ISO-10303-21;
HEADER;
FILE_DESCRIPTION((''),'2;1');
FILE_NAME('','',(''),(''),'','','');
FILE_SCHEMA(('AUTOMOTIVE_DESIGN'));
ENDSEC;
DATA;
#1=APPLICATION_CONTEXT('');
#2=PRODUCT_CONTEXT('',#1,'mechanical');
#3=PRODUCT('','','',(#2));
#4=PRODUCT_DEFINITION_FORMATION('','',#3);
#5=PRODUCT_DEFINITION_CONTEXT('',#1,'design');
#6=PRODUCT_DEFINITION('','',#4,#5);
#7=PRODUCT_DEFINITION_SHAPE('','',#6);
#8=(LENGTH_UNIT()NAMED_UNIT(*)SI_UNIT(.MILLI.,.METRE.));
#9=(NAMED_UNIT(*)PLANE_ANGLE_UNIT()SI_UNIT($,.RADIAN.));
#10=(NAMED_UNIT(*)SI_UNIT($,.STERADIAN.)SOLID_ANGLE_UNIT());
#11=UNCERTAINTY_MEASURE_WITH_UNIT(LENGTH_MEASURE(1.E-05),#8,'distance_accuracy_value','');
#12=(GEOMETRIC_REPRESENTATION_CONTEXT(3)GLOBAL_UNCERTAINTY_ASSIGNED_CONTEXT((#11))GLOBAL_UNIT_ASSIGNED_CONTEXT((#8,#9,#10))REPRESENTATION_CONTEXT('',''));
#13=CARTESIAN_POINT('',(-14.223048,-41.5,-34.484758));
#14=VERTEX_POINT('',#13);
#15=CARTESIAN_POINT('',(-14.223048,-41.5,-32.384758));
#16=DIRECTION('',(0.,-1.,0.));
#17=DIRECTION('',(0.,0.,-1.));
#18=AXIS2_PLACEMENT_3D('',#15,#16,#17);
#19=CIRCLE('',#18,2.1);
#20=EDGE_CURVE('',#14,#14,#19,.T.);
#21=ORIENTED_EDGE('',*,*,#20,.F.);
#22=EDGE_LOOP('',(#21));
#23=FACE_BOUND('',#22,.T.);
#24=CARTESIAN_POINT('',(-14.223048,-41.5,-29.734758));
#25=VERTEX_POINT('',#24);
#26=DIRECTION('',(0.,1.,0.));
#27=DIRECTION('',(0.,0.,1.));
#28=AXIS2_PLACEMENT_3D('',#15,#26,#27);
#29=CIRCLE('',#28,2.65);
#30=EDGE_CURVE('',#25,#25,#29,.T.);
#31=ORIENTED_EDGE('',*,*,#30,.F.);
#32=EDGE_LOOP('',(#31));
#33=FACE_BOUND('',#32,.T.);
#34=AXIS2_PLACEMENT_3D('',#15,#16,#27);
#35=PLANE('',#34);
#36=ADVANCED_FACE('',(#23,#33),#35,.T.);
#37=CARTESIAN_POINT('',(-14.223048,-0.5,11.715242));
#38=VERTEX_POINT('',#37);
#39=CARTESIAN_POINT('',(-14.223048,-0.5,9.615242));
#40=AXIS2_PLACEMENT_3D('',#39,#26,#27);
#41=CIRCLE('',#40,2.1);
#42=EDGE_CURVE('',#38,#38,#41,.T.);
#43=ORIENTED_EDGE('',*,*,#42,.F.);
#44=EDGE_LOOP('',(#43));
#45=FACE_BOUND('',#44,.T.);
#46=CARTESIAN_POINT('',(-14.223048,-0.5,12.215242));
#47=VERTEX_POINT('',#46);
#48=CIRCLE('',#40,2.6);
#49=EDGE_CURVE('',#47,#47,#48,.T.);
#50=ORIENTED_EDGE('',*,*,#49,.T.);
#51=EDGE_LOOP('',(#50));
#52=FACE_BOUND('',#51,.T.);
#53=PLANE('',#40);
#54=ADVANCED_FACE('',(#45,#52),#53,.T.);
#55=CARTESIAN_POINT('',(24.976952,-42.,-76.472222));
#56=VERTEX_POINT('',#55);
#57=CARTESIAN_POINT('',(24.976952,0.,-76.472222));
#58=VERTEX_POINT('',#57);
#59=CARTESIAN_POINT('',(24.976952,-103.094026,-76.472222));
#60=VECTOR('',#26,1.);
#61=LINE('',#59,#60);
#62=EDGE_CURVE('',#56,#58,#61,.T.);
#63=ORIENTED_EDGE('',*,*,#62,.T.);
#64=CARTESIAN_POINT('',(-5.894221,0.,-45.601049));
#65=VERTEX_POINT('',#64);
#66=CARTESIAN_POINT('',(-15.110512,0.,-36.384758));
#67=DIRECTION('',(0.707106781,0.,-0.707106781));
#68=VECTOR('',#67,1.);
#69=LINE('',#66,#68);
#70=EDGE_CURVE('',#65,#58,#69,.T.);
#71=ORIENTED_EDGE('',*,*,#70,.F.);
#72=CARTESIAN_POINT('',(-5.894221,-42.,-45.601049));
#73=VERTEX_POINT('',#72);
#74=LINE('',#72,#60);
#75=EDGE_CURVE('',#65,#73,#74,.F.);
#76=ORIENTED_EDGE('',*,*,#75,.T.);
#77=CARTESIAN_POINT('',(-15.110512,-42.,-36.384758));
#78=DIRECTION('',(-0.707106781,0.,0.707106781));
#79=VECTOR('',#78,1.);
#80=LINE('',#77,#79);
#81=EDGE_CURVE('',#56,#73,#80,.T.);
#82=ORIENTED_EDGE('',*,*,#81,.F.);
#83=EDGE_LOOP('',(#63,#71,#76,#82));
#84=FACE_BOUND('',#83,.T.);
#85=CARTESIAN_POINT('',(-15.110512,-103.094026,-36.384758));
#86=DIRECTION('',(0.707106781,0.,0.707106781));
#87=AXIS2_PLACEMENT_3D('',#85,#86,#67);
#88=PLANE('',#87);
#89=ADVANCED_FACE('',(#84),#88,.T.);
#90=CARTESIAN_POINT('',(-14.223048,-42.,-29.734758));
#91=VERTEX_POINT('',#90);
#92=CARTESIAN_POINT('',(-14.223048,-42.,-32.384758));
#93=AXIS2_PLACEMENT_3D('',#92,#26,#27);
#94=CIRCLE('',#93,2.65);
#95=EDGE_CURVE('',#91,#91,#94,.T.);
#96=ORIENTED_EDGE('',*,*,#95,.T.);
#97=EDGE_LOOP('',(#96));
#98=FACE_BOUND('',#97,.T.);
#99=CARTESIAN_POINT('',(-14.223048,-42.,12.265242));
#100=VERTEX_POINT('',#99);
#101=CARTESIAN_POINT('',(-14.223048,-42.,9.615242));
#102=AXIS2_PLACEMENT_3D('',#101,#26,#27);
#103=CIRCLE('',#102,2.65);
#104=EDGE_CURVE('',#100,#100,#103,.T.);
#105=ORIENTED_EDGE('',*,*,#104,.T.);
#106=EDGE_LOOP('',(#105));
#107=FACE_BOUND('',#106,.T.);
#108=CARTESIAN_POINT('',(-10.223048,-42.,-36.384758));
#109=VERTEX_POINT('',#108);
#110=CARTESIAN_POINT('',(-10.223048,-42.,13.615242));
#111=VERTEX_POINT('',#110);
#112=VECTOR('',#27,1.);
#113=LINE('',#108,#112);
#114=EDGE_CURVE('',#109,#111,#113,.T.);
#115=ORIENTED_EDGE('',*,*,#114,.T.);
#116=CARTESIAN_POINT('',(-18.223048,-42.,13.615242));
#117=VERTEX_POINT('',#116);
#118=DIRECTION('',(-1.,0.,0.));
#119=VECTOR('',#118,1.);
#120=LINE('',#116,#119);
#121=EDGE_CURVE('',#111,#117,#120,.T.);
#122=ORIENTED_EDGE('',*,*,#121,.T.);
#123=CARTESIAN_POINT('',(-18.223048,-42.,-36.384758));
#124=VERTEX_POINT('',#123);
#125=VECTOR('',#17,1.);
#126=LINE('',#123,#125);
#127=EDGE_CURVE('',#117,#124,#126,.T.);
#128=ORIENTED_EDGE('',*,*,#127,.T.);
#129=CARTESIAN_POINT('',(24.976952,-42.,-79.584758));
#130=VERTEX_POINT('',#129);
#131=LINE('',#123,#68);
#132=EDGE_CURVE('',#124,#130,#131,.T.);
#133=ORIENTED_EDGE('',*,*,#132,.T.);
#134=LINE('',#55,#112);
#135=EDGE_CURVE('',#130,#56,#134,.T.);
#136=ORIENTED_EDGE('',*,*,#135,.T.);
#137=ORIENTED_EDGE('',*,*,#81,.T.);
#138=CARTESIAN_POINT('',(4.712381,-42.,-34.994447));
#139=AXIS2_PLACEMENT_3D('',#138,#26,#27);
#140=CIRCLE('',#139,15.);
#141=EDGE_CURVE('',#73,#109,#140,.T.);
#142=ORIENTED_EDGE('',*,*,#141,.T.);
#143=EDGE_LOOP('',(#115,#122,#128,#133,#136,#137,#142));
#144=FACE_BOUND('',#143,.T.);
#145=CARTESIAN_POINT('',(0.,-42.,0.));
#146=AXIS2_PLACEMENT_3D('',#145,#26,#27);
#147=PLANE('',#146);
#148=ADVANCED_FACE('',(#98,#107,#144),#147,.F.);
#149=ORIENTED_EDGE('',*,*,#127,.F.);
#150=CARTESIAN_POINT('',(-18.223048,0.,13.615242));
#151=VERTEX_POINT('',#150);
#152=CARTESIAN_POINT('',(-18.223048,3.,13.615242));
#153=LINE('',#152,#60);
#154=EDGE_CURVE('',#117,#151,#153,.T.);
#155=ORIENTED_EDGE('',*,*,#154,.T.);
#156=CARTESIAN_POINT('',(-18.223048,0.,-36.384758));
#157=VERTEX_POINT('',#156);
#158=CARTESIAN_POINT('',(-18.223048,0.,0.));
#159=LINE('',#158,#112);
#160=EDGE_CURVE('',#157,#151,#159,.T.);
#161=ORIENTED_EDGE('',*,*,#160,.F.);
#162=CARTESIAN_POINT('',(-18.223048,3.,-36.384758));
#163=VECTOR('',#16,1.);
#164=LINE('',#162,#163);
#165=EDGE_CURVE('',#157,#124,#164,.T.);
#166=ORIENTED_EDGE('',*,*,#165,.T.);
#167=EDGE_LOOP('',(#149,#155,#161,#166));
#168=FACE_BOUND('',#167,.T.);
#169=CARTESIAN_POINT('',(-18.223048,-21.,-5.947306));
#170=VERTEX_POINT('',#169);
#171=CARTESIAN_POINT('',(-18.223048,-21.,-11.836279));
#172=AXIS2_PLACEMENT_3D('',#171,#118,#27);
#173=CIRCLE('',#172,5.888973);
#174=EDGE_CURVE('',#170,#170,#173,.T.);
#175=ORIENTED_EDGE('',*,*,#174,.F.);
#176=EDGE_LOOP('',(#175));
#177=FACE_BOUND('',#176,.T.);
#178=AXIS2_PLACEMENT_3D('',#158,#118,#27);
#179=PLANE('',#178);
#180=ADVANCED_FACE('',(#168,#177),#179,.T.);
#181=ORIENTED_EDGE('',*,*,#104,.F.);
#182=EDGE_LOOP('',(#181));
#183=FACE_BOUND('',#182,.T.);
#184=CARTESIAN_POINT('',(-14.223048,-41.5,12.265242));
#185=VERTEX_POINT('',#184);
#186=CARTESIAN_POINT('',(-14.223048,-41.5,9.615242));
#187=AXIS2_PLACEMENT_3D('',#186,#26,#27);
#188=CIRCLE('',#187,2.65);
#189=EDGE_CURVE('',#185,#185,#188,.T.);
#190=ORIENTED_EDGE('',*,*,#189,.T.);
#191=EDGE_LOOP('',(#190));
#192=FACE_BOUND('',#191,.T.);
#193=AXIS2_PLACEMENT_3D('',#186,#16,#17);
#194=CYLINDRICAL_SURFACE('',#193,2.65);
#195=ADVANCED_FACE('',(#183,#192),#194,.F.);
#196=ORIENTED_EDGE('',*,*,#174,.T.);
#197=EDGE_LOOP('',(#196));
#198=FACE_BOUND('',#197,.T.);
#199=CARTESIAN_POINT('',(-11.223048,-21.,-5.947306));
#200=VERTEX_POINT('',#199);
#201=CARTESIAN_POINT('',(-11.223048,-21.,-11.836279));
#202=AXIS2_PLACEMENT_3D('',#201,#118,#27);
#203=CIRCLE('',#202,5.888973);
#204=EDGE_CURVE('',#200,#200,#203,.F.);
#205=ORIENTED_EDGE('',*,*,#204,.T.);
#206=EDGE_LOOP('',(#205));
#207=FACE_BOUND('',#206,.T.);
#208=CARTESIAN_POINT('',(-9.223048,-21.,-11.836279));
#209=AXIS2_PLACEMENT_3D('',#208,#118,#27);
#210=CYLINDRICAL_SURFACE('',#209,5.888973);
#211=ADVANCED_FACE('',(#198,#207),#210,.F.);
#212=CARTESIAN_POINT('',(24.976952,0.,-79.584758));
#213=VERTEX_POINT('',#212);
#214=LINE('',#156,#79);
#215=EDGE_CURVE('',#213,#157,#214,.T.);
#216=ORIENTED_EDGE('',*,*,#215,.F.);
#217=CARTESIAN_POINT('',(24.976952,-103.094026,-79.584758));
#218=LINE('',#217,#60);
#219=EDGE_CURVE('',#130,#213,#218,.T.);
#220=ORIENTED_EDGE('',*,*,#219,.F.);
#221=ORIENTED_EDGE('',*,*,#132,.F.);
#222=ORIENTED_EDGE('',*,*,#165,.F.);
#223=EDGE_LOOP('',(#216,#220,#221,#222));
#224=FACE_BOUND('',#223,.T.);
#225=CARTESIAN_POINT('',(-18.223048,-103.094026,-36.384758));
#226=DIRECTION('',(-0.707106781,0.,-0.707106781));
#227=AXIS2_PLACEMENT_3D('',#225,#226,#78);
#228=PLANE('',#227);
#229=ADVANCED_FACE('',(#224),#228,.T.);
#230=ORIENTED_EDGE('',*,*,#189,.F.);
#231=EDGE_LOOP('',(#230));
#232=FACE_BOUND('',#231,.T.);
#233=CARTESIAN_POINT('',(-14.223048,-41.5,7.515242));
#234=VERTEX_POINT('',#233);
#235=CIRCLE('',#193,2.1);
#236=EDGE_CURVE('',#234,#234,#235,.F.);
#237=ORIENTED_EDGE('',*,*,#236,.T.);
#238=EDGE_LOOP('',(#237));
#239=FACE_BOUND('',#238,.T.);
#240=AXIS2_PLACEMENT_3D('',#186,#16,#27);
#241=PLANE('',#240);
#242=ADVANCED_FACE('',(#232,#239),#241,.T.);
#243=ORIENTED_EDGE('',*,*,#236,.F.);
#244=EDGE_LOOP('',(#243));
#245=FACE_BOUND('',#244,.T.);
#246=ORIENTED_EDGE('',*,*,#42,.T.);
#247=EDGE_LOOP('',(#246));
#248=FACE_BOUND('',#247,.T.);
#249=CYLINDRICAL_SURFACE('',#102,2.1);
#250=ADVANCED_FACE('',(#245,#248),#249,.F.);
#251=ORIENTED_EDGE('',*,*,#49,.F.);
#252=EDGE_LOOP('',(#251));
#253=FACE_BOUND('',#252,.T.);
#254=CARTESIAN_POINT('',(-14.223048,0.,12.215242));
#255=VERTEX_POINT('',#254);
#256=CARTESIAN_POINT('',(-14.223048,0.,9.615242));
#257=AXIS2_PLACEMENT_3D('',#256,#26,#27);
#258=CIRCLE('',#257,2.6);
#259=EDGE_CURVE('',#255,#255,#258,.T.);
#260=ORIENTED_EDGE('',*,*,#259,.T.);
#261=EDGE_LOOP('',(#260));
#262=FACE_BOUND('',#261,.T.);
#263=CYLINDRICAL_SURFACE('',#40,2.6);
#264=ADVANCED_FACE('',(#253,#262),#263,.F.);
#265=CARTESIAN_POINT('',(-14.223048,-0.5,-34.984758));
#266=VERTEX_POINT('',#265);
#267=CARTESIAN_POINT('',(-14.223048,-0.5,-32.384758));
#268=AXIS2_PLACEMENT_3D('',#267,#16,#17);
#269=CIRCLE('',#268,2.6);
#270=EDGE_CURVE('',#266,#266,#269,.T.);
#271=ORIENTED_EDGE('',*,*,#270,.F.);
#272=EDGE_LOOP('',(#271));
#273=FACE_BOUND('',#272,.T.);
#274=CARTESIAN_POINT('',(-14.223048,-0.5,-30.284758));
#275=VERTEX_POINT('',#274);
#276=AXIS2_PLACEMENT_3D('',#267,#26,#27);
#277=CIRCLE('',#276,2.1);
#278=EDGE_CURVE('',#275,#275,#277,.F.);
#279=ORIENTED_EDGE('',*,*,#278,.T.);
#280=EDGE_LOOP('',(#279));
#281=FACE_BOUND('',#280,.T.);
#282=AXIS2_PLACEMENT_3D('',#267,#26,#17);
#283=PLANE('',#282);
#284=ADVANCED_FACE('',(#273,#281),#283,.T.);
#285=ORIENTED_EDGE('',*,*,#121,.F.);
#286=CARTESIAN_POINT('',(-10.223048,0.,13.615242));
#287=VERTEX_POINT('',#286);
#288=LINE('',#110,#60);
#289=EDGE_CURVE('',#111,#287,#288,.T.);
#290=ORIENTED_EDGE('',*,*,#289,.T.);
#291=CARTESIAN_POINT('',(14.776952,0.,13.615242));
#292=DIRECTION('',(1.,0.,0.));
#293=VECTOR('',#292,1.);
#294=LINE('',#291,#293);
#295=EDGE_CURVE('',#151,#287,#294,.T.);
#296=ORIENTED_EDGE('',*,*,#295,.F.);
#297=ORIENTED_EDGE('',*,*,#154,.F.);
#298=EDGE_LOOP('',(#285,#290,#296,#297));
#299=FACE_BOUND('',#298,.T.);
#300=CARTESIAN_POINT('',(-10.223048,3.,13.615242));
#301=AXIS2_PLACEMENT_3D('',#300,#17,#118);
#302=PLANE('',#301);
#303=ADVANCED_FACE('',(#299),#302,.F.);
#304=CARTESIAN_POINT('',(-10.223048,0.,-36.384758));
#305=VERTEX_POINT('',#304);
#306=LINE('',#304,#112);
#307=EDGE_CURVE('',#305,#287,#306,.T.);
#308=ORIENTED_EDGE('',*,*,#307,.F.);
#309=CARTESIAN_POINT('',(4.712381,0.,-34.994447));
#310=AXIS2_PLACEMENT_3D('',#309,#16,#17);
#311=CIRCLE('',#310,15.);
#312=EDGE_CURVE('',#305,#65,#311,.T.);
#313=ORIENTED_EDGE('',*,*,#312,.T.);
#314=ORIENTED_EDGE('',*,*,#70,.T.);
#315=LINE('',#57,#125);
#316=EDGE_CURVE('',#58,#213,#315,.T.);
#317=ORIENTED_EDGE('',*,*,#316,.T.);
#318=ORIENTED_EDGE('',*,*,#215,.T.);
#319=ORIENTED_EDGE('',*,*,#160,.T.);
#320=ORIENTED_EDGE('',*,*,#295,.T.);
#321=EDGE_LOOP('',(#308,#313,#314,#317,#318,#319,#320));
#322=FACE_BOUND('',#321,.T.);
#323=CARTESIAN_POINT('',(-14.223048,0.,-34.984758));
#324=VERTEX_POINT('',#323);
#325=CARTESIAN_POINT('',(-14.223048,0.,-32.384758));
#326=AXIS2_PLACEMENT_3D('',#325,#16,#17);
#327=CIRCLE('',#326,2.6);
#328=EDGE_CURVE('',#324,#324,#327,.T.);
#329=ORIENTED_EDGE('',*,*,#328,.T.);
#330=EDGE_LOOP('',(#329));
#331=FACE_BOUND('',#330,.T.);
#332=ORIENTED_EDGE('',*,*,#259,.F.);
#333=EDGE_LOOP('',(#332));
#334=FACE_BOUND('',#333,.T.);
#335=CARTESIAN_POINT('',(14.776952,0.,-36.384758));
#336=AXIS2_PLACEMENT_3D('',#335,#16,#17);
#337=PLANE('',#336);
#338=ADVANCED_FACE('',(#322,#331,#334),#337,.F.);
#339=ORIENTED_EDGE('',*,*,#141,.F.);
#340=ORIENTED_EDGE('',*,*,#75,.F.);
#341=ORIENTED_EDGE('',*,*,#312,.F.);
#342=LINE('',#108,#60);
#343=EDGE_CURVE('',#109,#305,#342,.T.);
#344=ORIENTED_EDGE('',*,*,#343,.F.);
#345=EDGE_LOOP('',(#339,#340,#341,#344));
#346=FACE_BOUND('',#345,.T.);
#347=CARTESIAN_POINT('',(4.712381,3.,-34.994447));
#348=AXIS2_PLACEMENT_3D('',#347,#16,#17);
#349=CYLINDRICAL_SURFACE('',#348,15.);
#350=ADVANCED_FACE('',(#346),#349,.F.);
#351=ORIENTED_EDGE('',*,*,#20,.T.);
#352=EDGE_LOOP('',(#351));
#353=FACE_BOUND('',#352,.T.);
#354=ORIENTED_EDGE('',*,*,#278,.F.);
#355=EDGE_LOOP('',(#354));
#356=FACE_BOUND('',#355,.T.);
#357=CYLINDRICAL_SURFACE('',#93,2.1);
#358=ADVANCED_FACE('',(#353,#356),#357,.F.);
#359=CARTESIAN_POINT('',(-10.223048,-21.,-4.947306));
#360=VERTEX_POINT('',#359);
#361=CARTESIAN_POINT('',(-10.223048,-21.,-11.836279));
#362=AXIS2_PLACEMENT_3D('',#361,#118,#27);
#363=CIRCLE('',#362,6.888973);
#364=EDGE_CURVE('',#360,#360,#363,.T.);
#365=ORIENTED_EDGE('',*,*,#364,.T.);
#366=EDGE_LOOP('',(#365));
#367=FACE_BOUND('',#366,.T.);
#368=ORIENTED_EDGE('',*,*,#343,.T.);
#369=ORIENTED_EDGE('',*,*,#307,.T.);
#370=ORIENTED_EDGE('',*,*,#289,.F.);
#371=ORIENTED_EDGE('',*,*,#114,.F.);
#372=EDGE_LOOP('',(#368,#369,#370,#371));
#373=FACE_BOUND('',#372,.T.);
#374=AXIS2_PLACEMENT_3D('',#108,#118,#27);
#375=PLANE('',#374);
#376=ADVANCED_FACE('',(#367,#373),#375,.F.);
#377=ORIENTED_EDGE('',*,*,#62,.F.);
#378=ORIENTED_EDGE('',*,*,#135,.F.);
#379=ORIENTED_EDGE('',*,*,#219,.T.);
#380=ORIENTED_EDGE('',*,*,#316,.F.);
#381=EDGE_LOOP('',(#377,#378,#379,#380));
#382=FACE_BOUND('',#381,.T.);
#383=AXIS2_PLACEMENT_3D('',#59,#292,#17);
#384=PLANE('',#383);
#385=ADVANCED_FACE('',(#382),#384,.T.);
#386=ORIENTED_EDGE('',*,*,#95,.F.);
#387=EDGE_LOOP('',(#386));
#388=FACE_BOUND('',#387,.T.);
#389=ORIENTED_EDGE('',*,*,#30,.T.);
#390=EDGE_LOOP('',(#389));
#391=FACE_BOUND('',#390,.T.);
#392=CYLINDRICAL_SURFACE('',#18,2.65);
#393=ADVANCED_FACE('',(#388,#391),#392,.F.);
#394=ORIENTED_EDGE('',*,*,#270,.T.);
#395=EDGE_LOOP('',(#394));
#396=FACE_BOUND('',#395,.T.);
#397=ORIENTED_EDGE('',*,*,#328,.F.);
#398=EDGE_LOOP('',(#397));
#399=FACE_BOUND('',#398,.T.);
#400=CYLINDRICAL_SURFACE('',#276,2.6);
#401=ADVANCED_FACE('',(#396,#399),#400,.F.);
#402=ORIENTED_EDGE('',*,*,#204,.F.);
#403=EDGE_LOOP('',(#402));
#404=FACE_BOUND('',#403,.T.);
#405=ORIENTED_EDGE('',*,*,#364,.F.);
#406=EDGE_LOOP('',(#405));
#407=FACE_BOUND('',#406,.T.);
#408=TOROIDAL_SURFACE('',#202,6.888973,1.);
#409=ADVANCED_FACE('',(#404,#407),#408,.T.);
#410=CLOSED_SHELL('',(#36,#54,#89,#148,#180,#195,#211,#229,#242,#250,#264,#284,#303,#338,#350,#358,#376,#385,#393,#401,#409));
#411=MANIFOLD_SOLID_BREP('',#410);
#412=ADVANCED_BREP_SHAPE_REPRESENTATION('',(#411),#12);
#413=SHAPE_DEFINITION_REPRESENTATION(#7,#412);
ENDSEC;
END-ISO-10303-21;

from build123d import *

# Parameters (mm, degrees)
SKETCH1_W           = 25
SKETCH1_H           = 50
SKETCH1_R           = 3.4
BOSS_EXTRUDE1_DEPTH = 3
SKETCH2_W           = 50
SKETCH2_H           = 3
BOSS_EXTRUDE2_DEPTH = 8
SKETCH3_W           = 8
SKETCH3_H           = 50
BOSS_EXTRUDE3_DEPTH = 42
SKETCH4_R           = 2.65
CUT_EXTRUDE1_DEPTH  = 0.5
SKETCH5_R           = 5.888972746
CUT_EXTRUDE2_DEPTH  = 9
FILLET2_R           = 1
SKETCH6_R           = 12.6
BOSS_EXTRUDE4_DEPTH = 2
FILLET4_R           = 1
SKETCH8_R           = 1.589780168
SKETCH8_R_2         = 1.777428262
CUT_EXTRUDE3_DEPTH  = 10
SKETCH9_W           = 49.021678163
SKETCH9_H           = 20.976854622
CUT_EXTRUDE4_DEPTH  = 68.79439129
SKETCH11_R          = 2.1
CUT_EXTRUDE5_DEPTH  = 59.480168703
SKETCH14_R          = 2.6
CUT_EXTRUDE6_DEPTH  = 0.5
BOSS_EXTRUDE5_DEPTH = 42
FILLET5_R           = 15


with BuildPart() as part:
    # Sketch1 → Boss-Extrude1 (new body)
    with BuildSketch(Plane(origin=(0, 0, 0), x_dir=(1, 0, 0), z_dir=(0, 1, 0))):
        with Locations((2.276951673, 11.384758364)):
            Rectangle(SKETCH1_W, SKETCH1_H)
        with Locations(Location((1.276951673, 11.384758364, 0), (0, 0, 270))):
            Circle(SKETCH1_R, mode=Mode.SUBTRACT)
    extrude(amount=BOSS_EXTRUDE1_DEPTH)

    # Sketch2 → Boss-Extrude2 (add)
    with BuildSketch(Plane.ZY.offset(10.223048327)):
        with Locations((-11.384758364, 1.5)):
            Rectangle(SKETCH2_W, SKETCH2_H)
    extrude(amount=BOSS_EXTRUDE2_DEPTH)

    # Sketch3 → Boss-Extrude3 (add)
    with BuildSketch(Plane.XZ):
        with Locations((-14.223048327, -11.384758364)):
            Rectangle(SKETCH3_W, SKETCH3_H)
    extrude(amount=BOSS_EXTRUDE3_DEPTH)

    # Sketch4 → Cut-Extrude1 (cut)
    with BuildSketch(Plane(origin=(0, 3, 0), x_dir=(1, 0, 0), z_dir=(0, 1, 0))):
        with Locations(Location((-14.223048327, 32.384758364, 0), (0, 0, 270))):
            Circle(SKETCH4_R)
        with Locations(Location((-14.223048327, -9.615241636, 0), (0, 0, 270))):
            Circle(SKETCH4_R)
    cut_extrude1 = extrude(amount=-CUT_EXTRUDE1_DEPTH, mode=Mode.SUBTRACT)

    # Mirror1: Cut-Extrude1 across plane
    add(cut_extrude1.mirror(Plane.ZX.offset(-19.5)), mode=Mode.SUBTRACT)

    # Sketch5 → Cut-Extrude2 (cut)
    with BuildSketch(Plane.ZY.offset(18.223048327)):
        with Locations((-11.836279124, -21)):
            Circle(SKETCH5_R)
    extrude(amount=-CUT_EXTRUDE2_DEPTH, mode=Mode.SUBTRACT)

    # Fillet2
    fillet2_edges = [part.edges().sort_by_distance(p)[0] for p in [
        (-10.223048327, -21, -17.72525187),
    ]]
    fillet(fillet2_edges, radius=FILLET2_R)

    # Mirror2: Cut-Extrude1 across plane
    add(cut_extrude1.mirror(Plane.ZY.offset(1.723048327)), mode=Mode.SUBTRACT)

    # Sketch6 → Boss-Extrude4 (add)
    with BuildSketch(Plane(origin=(0, 3, 0), x_dir=(1, 0, 0), z_dir=(0, 1, 0))):
        with BuildLine():
            Line((14.776951673, 5.825082115), (14.776951673, 16.944434614))
            ThreePointArc((14.776951673, 16.944434614), (-13.323048327, 11.384758364), (14.776951673, 5.825082115))
        make_face()
        with Locations(Location((1.276951673, 11.384758364, 0), (0, 0, 270))):
            Circle(SKETCH6_R, mode=Mode.SUBTRACT)
    extrude(amount=BOSS_EXTRUDE4_DEPTH)

    # Fillet4
    # the kernel refuses this fillet: 1 mm, written as the material it takes off along each edge
    with BuildSketch(Plane(origin=(14.776951673, 5, -3.325082115), x_dir=(0, -1, 0), z_dir=(0, 0, -1))) as fillet4_piece_1:
        with BuildLine():
            CenterArc((FILLET4_R, FILLET4_R), FILLET4_R, 180, 90)
            Line((0, FILLET4_R), (0, 0))
            Line((0, 0), (FILLET4_R, 0))
        make_face()
    extrude(amount=16.119352499, mode=Mode.SUBTRACT)

    # Sketch8 → Cut-Extrude3 (cut)
    with BuildSketch(Plane(origin=(0, 3, 0), x_dir=(1, 0, 0), z_dir=(0, 1, 0))):
        with Locations(Location((1.276951673, 19.884758364, 0), (0, 0, 270))):
            Circle(SKETCH8_R)
        with Locations(Location((1.276951673, 2.884758364, 0), (0, 0, 270))):
            Circle(SKETCH8_R_2)
    extrude(amount=-CUT_EXTRUDE3_DEPTH, mode=Mode.SUBTRACT)

    # Sketch9 → Cut-Extrude4 (cut, through all)
    with BuildSketch(Plane.XY.offset(13.615241636)):
        with Locations((-9.733887409, 10.488427311)):
            Rectangle(SKETCH9_W, SKETCH9_H)
    extrude(amount=-CUT_EXTRUDE4_DEPTH, mode=Mode.SUBTRACT)

    # Sketch11 → Cut-Extrude5 (cut, through all)
    with BuildSketch(Plane(origin=(0, 0, 0), x_dir=(1, 0, 0), z_dir=(0, 1, 0))):
        with Locations(Location((-14.223048327, 32.384758364, 0), (0, 0, 270))):
            Circle(SKETCH11_R)
    cut_extrude5 = extrude(amount=-CUT_EXTRUDE5_DEPTH, mode=Mode.SUBTRACT)

    # Mirror3: Cut-Extrude5 across plane
    add(cut_extrude5.mirror(Plane.XY.offset(-11.384758364)), mode=Mode.SUBTRACT)

    # Sketch14 → Cut-Extrude6 (cut)
    with BuildSketch(Plane(origin=(0, 0, 0), x_dir=(1, 0, 0), z_dir=(0, 1, 0))):
        with Locations(Location((-14.223048327, -9.615241636, 0), (0, 0, 270))):
            Circle(SKETCH14_R)
    cut_extrude6 = extrude(amount=-CUT_EXTRUDE6_DEPTH, mode=Mode.SUBTRACT)

    # Mirror4: Cut-Extrude6 across plane
    add(cut_extrude6.mirror(Plane.XY.offset(-11.384758364)), mode=Mode.SUBTRACT)

    # Sketch15 → Boss-Extrude5 (add)
    with BuildSketch(Plane(origin=(0, 0, 0), x_dir=(1, 0, 0), z_dir=(0, 1, 0))):
        Polygon((-18.223048327, 36.384758364), (24.976951673, 79.584758364), (24.976951673, 76.472221629), (-15.110511592, 36.384758364), align=None)
    extrude(amount=-BOSS_EXTRUDE5_DEPTH)

    # Fillet5
    # the kernel refuses this fillet: 15 mm, written as the material it adds along each edge
    with BuildSketch(Plane(origin=(-15.110511592, 0, -36.384758364), x_dir=(1, 0, 0), z_dir=(0, -1, 0))) as fillet5_piece_1:
        with BuildLine():
            CenterArc((19.822892097, 1.390311339), FILLET5_R, 185.31823153, 39.68176847)
            Line((9.216290379, -9.216290379), (0, 0))
            Line((0, 0), (4.887463265, 0))
        make_face()
    extrude(amount=42)


solid = part.part
